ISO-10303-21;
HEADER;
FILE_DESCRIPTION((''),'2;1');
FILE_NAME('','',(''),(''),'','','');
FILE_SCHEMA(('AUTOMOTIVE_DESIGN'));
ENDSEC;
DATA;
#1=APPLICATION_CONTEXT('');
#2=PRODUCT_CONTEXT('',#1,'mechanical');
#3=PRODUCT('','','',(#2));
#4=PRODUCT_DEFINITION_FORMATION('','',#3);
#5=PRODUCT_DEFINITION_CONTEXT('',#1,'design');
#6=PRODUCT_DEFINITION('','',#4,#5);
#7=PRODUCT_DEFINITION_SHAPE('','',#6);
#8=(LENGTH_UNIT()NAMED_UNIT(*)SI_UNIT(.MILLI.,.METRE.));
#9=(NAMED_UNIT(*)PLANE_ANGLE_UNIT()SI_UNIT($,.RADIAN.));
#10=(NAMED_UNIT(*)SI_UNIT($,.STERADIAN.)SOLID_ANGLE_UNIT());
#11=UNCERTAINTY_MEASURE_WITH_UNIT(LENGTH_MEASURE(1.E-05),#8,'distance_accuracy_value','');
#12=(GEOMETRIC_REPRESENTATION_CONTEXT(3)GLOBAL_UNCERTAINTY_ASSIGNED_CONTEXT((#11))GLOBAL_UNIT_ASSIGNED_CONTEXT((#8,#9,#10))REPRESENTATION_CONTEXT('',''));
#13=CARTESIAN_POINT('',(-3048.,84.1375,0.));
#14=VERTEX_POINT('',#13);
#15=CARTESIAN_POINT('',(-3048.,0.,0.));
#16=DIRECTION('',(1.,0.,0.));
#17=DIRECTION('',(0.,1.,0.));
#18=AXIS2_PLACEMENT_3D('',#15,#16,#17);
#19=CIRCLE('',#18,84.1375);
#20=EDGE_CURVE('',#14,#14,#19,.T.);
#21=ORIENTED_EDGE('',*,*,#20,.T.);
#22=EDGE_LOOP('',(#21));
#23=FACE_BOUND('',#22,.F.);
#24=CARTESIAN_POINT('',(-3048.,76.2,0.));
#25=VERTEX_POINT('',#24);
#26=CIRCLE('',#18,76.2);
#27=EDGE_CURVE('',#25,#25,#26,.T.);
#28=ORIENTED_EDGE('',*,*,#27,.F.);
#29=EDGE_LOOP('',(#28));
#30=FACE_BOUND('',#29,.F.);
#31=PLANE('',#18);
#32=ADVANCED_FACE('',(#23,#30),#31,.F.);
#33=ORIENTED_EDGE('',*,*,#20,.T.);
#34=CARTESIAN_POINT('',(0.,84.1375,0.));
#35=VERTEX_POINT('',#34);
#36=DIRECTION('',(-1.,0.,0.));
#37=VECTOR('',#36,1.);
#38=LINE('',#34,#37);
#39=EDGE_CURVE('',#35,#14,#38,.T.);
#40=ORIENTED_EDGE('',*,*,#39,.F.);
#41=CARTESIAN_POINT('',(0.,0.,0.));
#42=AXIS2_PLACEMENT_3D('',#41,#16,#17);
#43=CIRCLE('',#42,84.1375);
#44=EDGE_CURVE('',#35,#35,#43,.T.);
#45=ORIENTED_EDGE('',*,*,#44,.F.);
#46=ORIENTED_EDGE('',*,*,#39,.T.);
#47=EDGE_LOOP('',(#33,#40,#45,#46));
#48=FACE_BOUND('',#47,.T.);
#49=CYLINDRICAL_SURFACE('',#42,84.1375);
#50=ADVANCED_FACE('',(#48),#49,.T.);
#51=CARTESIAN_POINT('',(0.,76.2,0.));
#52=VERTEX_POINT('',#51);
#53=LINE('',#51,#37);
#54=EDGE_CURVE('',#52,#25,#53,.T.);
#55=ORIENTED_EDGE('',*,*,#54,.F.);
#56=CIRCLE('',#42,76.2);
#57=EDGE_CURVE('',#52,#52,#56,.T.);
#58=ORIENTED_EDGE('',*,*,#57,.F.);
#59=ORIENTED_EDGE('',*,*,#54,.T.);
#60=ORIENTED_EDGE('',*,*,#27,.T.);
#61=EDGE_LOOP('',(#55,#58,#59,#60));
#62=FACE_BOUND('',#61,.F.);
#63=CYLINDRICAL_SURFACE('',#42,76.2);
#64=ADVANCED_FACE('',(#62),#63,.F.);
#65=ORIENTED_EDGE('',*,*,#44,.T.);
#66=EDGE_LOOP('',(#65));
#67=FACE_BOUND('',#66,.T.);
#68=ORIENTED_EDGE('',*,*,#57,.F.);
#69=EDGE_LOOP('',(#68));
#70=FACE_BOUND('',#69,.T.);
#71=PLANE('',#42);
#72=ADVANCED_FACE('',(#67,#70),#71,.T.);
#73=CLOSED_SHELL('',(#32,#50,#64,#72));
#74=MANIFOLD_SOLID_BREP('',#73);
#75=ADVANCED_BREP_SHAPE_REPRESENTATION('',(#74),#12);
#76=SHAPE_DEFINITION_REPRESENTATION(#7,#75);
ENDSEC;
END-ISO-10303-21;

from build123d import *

# Parameters (mm, degrees)
F1_R     = 84.1375
F1_R_2   = 76.2
F2_DEPTH = 3048


# Not quite as in the source:
# - a variable given as a bare number and used for a length is read in inches; the dataset says mm whatever the document's units were


with BuildPart() as f2:
    # F1 (on Right) → F2 (new body)
    with BuildSketch(Plane.YZ):
        Circle(F1_R)
        Circle(F1_R_2, mode=Mode.SUBTRACT)
    extrude(amount=-F2_DEPTH)


solid = f2.part
